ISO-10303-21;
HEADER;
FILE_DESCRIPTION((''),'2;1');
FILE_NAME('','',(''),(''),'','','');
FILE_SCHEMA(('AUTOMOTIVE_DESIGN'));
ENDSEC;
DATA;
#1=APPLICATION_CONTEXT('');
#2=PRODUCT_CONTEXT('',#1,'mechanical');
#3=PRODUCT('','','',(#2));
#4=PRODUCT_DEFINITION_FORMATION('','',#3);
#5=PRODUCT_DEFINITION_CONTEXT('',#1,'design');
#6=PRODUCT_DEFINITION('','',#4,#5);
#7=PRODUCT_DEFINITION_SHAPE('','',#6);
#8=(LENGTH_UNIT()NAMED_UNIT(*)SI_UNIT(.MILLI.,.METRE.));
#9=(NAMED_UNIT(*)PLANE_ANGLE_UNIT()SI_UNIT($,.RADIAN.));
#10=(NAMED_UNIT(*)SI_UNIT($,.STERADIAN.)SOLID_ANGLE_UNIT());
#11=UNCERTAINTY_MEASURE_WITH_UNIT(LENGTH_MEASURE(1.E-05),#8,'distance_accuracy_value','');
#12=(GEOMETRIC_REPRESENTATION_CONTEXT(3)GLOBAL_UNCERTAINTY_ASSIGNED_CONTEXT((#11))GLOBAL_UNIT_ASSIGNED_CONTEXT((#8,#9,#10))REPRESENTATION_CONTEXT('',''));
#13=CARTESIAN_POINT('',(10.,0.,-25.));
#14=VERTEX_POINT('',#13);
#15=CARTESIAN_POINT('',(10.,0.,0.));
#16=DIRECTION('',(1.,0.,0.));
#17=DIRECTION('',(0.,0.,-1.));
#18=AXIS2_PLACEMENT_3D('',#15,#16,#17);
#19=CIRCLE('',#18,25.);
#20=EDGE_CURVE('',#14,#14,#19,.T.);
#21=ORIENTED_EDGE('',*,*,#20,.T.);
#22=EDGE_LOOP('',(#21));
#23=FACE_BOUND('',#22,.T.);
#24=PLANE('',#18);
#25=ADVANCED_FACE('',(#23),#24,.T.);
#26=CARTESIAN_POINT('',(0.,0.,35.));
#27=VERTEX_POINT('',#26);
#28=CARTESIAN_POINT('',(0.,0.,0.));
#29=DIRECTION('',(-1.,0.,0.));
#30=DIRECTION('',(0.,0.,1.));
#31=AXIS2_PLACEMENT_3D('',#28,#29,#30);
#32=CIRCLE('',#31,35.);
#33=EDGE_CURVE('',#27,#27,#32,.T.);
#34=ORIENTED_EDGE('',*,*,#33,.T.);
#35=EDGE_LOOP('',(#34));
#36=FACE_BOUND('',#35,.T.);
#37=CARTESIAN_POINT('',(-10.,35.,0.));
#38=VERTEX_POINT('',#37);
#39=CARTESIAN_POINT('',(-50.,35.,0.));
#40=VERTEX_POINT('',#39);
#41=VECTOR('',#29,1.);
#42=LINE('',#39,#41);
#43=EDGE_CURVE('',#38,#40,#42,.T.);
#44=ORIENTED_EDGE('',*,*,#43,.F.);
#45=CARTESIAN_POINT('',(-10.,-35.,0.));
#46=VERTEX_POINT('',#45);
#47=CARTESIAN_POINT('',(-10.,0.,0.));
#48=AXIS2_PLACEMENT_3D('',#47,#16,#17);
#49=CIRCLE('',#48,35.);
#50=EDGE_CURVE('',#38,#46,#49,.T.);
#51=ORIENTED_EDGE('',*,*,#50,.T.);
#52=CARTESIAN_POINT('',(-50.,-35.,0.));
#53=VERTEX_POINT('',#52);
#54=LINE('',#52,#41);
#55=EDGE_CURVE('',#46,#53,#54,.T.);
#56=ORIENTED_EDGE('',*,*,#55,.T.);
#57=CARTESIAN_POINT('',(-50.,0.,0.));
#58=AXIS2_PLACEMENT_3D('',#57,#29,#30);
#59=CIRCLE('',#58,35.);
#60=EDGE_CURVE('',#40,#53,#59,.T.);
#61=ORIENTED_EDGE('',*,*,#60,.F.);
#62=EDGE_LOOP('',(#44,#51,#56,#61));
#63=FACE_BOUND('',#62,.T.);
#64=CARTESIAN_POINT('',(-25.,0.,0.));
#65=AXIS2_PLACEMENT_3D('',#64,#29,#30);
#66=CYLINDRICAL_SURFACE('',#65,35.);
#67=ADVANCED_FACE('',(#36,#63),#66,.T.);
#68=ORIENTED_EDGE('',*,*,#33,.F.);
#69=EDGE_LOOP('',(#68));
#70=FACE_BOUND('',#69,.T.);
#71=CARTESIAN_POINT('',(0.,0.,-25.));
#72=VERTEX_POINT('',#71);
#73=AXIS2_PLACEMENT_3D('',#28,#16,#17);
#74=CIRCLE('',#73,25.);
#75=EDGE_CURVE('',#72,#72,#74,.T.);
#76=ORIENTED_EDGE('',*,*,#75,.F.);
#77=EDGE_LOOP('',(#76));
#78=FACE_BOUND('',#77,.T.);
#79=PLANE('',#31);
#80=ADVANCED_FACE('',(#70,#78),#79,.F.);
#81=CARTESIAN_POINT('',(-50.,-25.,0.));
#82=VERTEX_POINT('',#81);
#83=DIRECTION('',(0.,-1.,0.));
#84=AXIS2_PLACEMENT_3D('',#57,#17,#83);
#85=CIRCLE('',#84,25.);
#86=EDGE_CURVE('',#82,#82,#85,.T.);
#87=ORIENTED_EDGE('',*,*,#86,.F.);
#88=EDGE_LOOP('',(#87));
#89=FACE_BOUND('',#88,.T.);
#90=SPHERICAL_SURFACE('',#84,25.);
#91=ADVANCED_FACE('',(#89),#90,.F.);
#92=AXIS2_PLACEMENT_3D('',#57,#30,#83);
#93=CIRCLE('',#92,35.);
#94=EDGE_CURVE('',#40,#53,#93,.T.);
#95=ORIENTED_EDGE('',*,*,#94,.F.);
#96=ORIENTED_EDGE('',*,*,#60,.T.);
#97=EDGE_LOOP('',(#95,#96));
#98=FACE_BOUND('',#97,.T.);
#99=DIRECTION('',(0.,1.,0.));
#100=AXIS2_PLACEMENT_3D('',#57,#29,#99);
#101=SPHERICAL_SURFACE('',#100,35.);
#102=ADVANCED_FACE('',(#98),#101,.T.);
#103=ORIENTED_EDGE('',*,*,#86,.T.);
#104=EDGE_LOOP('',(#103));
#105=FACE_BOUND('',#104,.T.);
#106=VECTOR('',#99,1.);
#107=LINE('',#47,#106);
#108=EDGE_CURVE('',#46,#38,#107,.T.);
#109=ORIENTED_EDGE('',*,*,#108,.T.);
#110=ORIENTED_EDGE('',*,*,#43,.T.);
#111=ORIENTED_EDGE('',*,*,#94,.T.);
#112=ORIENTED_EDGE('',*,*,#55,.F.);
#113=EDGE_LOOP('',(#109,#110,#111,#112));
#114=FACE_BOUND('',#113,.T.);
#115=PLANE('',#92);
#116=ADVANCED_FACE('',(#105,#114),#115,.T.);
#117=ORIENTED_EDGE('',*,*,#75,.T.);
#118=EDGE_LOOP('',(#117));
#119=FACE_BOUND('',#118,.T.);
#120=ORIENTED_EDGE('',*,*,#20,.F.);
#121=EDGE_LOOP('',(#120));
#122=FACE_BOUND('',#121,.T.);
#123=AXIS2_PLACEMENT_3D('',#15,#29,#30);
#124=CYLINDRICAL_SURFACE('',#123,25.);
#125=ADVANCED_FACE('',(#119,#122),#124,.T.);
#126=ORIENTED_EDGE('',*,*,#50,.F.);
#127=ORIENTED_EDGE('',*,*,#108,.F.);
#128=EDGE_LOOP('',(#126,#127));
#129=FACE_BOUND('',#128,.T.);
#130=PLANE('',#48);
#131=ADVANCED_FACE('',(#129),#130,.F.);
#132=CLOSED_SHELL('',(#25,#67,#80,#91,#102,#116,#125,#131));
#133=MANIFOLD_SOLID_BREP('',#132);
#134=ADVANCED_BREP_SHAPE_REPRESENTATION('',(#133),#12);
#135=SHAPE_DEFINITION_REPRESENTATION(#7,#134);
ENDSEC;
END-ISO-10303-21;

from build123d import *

# Parameters (mm, degrees)
REVOLVE1_ANGLE      = 180
SKETCH4_R           = 25
BOSS_EXTRUDE1_DEPTH = 10
SKETCH5_R           = 35
BOSS_EXTRUDE2_DEPTH = 10


# Read off the part's stored shape, not the designer's step: Revolve1
with BuildPart() as part:
    # Revolve1 outline → Revolve1 (revolve)
    with BuildSketch(Plane(origin=(0, 0, 0), x_dir=(0, -1, 0), z_dir=(0, 0, 1))):
        with BuildLine():
            Line((0, -75), (0, -85))
            ThreePointArc((0, -85), (24.748737342, -74.748737342), (35, -50))
            Line((35, -50), (35, 0))
            Line((35, 0), (0, 0))
            Line((0, 0), (0, -25))
            ThreePointArc((0, -25), (25, -50), (0, -75))
        make_face()
    revolve(axis=Axis((0, 0, 0), (1, 0, 0)), revolution_arc=REVOLVE1_ANGLE)

    # Sketch4 → Boss-Extrude1 (add)
    with BuildSketch(Plane(origin=(0, 0, 0), x_dir=(0, 0, -1), z_dir=(1, 0, 0))):
        with Locations(Location((0, 0, 0), (0, 0, 270))):
            Circle(SKETCH4_R)
    extrude(amount=BOSS_EXTRUDE1_DEPTH)

    # Sketch5 → Boss-Extrude2 (add)
    with BuildSketch(Plane(origin=(0, 0, 0), x_dir=(0, 0, -1), z_dir=(1, 0, 0))):
        with Locations(Location((0, 0, 0), (0, 0, 180))):
            Circle(SKETCH5_R)
    extrude(amount=-BOSS_EXTRUDE2_DEPTH)


solid = part.part
